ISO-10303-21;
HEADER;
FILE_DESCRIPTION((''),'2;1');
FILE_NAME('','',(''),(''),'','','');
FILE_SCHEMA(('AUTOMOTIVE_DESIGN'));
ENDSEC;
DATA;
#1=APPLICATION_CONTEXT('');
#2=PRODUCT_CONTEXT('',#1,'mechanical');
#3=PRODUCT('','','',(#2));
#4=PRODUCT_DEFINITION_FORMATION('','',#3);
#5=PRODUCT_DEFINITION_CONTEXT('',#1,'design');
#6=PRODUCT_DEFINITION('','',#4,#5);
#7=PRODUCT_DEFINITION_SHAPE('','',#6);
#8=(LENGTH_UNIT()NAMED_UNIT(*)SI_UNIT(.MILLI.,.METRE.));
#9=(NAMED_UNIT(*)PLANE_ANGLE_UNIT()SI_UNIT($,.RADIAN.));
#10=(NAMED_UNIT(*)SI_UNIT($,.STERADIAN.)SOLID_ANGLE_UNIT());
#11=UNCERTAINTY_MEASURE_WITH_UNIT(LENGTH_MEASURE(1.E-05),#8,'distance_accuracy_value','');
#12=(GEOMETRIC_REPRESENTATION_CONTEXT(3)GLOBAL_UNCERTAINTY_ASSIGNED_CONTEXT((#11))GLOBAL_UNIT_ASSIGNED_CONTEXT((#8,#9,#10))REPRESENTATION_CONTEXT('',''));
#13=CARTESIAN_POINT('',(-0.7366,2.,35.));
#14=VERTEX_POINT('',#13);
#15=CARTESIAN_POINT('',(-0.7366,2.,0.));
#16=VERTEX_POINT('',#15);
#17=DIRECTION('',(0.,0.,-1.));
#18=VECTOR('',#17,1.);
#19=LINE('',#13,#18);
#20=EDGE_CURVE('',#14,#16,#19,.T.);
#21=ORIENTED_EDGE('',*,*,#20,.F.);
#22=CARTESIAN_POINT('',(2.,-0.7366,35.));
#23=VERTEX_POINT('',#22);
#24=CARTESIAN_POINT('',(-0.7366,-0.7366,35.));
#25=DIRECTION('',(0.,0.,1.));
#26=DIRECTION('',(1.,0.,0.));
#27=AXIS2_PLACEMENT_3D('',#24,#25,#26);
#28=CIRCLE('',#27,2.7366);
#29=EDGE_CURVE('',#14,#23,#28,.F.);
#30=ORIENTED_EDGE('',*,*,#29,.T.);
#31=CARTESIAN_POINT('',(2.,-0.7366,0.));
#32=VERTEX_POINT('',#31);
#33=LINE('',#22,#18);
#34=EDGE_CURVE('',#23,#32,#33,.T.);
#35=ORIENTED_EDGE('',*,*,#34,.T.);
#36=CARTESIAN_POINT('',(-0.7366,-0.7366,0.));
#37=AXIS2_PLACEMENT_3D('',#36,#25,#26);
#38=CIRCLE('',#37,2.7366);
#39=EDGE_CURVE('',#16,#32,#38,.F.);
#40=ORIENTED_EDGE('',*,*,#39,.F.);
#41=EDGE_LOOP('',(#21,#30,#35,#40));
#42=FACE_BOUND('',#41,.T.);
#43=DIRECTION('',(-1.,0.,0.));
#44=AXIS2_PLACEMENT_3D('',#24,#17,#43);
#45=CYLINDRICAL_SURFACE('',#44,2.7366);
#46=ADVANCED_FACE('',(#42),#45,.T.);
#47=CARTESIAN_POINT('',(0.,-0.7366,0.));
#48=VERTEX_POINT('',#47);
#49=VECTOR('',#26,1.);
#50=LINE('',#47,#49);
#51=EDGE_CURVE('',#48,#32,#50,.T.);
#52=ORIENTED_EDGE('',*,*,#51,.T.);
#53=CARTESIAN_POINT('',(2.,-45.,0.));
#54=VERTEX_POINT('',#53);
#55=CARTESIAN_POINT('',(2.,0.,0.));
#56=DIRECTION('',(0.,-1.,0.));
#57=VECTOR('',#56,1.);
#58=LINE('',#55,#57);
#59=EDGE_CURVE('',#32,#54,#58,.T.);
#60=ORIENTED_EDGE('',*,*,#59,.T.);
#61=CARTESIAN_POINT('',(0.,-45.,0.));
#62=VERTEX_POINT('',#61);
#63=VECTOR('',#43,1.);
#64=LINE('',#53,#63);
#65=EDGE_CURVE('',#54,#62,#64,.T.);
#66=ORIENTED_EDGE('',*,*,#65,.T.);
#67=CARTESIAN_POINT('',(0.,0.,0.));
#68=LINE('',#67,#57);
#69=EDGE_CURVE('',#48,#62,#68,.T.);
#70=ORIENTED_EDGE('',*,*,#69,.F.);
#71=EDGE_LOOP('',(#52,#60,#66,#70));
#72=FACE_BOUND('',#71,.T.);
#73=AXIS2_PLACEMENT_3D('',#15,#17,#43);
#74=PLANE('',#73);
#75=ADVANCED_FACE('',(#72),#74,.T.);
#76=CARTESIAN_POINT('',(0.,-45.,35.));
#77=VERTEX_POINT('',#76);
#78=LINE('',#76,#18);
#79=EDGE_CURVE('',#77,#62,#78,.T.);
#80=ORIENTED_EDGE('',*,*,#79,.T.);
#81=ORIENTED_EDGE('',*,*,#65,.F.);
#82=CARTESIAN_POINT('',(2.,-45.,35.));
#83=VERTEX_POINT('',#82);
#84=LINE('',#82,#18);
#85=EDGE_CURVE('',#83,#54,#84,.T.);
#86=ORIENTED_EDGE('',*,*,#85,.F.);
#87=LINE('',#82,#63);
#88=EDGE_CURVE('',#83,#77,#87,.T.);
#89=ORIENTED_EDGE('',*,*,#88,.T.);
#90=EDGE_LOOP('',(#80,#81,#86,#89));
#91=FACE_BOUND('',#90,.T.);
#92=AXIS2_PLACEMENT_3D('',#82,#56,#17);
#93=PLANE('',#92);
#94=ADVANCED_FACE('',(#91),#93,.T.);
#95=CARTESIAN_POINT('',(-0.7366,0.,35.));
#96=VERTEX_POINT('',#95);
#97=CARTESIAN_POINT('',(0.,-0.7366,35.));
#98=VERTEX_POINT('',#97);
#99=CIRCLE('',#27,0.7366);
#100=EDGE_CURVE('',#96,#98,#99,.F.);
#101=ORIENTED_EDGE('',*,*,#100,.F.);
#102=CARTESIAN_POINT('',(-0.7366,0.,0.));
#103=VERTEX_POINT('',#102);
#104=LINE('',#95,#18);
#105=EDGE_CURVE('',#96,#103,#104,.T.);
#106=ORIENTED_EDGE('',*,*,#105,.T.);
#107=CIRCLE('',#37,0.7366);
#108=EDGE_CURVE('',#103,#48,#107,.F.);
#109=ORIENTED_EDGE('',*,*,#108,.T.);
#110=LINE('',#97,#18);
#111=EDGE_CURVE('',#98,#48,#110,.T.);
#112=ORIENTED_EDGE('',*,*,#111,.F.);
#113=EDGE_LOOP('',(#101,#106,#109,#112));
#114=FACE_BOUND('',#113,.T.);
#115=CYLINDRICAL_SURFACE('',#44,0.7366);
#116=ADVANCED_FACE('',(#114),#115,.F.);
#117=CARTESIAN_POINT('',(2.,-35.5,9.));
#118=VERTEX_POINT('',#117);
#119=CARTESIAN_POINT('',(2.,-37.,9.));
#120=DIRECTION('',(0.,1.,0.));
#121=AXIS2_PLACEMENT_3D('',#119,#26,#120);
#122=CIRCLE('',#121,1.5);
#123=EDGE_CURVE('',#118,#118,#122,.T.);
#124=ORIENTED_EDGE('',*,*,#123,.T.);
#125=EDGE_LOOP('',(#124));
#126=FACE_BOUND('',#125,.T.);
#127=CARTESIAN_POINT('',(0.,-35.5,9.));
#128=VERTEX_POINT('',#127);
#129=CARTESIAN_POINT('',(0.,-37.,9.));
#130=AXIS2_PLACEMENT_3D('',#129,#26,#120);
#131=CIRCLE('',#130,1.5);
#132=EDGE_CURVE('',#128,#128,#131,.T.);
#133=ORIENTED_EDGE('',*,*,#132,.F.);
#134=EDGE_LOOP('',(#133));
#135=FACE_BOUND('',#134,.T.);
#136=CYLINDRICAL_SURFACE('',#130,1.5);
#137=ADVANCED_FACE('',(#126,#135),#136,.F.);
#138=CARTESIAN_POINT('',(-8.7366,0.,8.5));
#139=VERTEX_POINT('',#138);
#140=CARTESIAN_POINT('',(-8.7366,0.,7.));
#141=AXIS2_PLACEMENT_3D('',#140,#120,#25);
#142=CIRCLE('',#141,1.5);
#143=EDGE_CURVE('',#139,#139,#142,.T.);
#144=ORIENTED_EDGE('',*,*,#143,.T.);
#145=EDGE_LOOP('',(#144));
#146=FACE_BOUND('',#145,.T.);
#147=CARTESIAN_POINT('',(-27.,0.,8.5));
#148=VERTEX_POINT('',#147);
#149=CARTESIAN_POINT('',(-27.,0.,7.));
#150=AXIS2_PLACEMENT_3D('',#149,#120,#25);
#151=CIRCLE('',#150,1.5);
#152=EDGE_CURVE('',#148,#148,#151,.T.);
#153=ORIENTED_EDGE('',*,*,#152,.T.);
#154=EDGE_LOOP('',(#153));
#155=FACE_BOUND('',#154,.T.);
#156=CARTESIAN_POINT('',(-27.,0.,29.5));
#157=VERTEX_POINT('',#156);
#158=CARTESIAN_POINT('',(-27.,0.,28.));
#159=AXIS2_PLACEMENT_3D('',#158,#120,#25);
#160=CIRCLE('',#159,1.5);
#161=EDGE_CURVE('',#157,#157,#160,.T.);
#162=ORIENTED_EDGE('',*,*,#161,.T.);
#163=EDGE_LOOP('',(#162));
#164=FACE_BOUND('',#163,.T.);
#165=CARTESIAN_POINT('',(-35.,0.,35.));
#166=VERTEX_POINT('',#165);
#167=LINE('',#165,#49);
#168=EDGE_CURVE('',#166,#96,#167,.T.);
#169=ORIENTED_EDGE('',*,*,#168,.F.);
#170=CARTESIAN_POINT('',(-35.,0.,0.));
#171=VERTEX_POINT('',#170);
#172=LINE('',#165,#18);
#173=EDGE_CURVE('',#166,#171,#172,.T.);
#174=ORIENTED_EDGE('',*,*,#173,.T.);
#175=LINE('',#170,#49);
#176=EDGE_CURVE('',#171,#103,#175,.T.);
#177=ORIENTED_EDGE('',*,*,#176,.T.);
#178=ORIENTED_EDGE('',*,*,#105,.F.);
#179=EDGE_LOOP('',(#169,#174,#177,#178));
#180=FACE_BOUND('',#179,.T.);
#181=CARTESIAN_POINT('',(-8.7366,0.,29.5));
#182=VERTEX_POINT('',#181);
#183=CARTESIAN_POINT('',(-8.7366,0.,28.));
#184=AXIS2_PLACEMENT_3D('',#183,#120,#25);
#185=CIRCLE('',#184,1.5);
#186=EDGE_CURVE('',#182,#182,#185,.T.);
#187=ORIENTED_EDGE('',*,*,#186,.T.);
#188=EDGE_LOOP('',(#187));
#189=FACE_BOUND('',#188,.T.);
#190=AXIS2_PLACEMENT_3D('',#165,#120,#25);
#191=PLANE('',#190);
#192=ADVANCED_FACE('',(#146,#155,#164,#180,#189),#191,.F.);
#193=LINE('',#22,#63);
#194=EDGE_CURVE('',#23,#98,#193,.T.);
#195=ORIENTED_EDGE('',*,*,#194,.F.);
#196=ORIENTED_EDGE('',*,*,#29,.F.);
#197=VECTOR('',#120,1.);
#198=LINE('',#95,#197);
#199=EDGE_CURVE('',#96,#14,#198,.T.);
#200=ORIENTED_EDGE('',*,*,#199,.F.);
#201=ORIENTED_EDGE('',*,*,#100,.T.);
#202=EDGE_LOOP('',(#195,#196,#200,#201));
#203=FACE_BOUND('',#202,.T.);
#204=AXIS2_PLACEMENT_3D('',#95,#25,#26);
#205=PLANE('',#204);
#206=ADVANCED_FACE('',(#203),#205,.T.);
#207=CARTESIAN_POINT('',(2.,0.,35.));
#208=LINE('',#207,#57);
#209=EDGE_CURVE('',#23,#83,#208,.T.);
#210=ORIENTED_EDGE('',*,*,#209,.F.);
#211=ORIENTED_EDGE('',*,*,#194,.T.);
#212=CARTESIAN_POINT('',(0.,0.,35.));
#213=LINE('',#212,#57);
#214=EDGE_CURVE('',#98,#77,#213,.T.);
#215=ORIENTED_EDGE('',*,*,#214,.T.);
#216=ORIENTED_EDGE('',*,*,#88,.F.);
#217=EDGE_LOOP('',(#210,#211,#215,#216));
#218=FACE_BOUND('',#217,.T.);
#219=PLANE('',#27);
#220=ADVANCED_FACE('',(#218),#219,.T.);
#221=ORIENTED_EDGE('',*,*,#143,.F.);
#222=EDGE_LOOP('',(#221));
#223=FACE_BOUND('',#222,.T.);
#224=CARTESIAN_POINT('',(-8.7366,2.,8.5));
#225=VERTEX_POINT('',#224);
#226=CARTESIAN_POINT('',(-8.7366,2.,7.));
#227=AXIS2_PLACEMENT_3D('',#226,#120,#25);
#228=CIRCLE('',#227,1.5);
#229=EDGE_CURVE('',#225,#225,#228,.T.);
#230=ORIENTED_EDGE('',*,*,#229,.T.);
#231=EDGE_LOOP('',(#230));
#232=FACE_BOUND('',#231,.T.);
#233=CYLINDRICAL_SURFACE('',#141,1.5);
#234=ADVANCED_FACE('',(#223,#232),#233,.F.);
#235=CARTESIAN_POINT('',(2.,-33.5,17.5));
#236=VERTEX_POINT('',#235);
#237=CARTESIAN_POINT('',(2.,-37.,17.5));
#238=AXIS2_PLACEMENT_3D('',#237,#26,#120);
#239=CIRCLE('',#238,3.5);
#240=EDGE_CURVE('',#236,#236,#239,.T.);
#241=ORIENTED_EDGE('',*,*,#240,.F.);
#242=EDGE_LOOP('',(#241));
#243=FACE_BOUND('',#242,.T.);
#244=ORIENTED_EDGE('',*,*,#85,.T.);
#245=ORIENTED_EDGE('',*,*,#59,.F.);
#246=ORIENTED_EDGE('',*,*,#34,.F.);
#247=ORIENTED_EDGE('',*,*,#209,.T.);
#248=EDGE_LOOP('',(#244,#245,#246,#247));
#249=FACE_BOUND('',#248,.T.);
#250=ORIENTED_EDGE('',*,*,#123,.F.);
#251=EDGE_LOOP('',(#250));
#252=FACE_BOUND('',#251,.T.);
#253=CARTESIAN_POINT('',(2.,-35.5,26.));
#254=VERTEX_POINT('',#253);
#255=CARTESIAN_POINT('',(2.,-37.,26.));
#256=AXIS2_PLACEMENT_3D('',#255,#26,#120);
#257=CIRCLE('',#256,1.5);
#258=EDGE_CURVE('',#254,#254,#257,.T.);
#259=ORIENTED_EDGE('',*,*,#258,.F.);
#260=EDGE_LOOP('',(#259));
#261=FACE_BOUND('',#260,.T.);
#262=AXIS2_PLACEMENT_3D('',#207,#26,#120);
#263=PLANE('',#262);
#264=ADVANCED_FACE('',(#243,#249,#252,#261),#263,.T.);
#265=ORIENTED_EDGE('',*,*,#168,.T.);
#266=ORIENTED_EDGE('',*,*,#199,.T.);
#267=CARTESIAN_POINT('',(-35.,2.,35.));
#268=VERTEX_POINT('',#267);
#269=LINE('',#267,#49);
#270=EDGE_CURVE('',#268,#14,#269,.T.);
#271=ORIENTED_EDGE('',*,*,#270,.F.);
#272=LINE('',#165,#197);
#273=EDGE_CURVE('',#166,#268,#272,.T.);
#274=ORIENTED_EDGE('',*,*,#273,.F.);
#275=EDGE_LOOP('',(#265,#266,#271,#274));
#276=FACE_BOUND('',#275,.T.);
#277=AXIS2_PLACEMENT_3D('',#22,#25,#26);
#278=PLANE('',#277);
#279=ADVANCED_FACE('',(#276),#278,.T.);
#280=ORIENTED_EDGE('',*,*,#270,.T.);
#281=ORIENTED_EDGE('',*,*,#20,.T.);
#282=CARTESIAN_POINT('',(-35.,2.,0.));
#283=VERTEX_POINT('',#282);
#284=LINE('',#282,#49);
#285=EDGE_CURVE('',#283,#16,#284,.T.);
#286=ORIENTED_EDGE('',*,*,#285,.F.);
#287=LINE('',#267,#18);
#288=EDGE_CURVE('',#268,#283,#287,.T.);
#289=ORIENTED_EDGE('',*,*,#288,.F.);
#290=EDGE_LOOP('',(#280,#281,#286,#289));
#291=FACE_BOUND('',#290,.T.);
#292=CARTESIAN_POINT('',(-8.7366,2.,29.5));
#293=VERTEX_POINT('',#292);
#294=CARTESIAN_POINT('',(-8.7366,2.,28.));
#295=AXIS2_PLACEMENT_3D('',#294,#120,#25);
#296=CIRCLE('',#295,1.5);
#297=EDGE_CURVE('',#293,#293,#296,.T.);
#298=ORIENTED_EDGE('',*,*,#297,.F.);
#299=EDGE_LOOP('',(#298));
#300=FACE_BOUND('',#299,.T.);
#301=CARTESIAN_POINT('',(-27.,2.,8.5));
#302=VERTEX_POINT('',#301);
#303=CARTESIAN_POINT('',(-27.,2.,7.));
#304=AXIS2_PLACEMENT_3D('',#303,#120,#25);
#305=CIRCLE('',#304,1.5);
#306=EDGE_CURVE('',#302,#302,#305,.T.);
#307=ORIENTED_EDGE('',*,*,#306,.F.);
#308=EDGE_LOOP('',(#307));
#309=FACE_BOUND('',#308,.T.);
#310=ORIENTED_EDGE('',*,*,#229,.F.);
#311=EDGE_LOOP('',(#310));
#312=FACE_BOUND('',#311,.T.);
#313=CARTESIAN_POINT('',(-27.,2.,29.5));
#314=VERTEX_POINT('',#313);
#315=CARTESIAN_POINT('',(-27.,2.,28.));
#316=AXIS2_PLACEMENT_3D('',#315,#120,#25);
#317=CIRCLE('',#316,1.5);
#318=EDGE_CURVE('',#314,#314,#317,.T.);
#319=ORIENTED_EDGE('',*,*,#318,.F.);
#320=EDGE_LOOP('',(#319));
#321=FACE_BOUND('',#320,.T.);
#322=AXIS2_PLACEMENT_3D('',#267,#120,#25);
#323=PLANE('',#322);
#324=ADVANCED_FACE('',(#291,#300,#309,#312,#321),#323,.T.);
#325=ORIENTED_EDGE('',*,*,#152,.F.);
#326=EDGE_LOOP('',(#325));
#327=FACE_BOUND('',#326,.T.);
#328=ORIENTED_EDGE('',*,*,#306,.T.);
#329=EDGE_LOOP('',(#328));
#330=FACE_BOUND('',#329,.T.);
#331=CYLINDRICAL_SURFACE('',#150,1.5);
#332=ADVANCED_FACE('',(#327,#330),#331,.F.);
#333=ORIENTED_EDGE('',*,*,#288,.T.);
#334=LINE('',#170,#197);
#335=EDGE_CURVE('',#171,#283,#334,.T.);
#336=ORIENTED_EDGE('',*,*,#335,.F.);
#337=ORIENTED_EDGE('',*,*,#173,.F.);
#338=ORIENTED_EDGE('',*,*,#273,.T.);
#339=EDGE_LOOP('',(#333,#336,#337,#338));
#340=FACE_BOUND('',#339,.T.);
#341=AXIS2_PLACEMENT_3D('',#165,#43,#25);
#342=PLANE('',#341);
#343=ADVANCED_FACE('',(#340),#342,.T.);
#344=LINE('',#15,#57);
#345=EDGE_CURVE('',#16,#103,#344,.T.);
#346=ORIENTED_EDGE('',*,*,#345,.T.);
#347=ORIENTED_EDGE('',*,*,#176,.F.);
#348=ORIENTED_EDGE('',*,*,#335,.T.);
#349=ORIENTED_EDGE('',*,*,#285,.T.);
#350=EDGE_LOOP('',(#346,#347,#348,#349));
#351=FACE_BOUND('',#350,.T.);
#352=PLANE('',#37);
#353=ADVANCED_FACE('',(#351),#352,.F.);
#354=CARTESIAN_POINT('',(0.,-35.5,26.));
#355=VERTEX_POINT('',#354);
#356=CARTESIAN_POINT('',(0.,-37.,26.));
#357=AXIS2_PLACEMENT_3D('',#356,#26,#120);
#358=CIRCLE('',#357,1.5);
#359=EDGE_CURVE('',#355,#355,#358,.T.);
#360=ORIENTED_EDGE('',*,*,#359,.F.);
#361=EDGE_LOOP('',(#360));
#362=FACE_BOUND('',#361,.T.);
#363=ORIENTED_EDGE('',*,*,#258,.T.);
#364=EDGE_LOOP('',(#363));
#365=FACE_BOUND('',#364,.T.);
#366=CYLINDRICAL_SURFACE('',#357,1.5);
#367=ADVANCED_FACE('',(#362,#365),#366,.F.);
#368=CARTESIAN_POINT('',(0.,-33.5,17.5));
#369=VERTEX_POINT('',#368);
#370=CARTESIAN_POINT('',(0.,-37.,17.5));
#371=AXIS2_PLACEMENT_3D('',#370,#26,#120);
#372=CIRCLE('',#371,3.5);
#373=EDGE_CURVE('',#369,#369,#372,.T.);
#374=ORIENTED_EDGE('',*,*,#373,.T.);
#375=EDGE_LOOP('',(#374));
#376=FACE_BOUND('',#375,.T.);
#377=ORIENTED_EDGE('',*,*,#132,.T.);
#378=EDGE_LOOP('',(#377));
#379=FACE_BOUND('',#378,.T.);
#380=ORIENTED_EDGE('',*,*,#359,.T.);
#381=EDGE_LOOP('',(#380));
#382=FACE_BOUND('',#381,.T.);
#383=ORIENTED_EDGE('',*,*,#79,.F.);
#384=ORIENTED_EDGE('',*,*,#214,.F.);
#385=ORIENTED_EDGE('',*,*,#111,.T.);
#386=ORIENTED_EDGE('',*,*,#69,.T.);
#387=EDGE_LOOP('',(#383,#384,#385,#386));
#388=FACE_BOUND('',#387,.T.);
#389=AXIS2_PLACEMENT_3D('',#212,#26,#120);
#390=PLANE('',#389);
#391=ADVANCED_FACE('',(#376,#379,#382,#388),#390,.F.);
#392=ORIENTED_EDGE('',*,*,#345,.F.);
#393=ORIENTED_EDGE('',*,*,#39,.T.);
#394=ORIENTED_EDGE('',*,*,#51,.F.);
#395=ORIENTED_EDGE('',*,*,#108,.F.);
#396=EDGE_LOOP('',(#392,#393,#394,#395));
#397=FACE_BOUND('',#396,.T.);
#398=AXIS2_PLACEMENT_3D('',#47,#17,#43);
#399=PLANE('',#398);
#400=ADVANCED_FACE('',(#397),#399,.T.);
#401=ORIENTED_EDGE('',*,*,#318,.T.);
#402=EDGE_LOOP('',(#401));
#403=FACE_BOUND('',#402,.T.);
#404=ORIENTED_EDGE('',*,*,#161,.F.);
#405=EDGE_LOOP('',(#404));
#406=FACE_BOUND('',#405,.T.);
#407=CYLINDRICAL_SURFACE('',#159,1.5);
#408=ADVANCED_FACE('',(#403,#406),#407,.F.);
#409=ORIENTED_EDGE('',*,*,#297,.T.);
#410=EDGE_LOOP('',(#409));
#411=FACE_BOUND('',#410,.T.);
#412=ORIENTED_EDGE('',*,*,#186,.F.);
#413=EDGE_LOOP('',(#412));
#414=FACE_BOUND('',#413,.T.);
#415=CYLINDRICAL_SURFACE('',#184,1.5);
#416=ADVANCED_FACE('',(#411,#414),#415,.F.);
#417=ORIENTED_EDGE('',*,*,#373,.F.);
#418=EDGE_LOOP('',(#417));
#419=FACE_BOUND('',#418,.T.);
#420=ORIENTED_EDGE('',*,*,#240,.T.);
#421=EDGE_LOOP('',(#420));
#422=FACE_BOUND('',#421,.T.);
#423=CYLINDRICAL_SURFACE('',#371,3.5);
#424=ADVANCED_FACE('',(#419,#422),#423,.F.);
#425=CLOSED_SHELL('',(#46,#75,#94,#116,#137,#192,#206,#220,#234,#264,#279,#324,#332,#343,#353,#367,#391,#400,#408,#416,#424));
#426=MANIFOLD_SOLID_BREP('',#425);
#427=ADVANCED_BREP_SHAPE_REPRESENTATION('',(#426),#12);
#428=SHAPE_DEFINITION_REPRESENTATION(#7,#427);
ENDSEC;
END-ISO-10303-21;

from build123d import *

# Parameters (mm, degrees)
T_LE_DE_BASE_PLI_E1_DEPTH = 35
ESQUISSE14_R              = 1.5
ENL_V_MAT_EXTRU_1_DEPTH   = 2
ESQUISSE15_R              = 3.5
ESQUISSE15_R_2            = 1.5
ENL_V_MAT_EXTRU_2_DEPTH   = 2


# Sheet-metal steps are written as plain solids
with BuildPart() as part:
    # Esquisse8 → Tôle de base pliée1 (new body)
    with BuildSketch(Plane.XY):
        with BuildLine():
            Line((-35, 0), (-0.7366, 0))
            ThreePointArc((-0.7366, 0), (-0.215745145, -0.215745145), (0, -0.7366))
            Line((0, -0.7366), (0, -45))
            Line((0, -45), (2, -45))
            Line((2, -45), (2, -0.7366))
            ThreePointArc((2, -0.7366), (1.198468417, 1.198468417), (-0.7366, 2))
            Line((-0.7366, 2), (-35, 2))
            Line((-35, 2), (-35, 0))
        make_face()
    extrude(amount=T_LE_DE_BASE_PLI_E1_DEPTH)

    # Esquisse14 → Enlèv. mat.-Extru.1 (cut)
    with BuildSketch(Plane(origin=(0, 2, 0), x_dir=(1, 0, 0), z_dir=(0, 1, 0))):
        with Locations(Location((-27, -7, 0), (0, 0, 270))):
            Circle(ESQUISSE14_R)
        with Locations(Location((-8.7366, -7, 0), (0, 0, 270))):
            Circle(ESQUISSE14_R)
        with Locations(Location((-8.7366, -28, 0), (0, 0, 270))):
            Circle(ESQUISSE14_R)
        with Locations(Location((-27, -28, 0), (0, 0, 270))):
            Circle(ESQUISSE14_R)
    extrude(amount=-ENL_V_MAT_EXTRU_1_DEPTH, mode=Mode.SUBTRACT)

    # Esquisse15 → Enlèv. mat.-Extru.2 (cut)
    with BuildSketch(Plane(origin=(2, 0, 0), x_dir=(0, 0, -1), z_dir=(1, 0, 0))):
        with Locations(Location((-17.5, -37, 0), (0, 0, 90))):
            Circle(ESQUISSE15_R)
        with Locations(Location((-9, -37, 0), (0, 0, 90))):
            Circle(ESQUISSE15_R_2)
        with Locations(Location((-26, -37, 0), (0, 0, 90))):
            Circle(ESQUISSE15_R_2)
    extrude(amount=-ENL_V_MAT_EXTRU_2_DEPTH, mode=Mode.SUBTRACT)


solid = part.part
